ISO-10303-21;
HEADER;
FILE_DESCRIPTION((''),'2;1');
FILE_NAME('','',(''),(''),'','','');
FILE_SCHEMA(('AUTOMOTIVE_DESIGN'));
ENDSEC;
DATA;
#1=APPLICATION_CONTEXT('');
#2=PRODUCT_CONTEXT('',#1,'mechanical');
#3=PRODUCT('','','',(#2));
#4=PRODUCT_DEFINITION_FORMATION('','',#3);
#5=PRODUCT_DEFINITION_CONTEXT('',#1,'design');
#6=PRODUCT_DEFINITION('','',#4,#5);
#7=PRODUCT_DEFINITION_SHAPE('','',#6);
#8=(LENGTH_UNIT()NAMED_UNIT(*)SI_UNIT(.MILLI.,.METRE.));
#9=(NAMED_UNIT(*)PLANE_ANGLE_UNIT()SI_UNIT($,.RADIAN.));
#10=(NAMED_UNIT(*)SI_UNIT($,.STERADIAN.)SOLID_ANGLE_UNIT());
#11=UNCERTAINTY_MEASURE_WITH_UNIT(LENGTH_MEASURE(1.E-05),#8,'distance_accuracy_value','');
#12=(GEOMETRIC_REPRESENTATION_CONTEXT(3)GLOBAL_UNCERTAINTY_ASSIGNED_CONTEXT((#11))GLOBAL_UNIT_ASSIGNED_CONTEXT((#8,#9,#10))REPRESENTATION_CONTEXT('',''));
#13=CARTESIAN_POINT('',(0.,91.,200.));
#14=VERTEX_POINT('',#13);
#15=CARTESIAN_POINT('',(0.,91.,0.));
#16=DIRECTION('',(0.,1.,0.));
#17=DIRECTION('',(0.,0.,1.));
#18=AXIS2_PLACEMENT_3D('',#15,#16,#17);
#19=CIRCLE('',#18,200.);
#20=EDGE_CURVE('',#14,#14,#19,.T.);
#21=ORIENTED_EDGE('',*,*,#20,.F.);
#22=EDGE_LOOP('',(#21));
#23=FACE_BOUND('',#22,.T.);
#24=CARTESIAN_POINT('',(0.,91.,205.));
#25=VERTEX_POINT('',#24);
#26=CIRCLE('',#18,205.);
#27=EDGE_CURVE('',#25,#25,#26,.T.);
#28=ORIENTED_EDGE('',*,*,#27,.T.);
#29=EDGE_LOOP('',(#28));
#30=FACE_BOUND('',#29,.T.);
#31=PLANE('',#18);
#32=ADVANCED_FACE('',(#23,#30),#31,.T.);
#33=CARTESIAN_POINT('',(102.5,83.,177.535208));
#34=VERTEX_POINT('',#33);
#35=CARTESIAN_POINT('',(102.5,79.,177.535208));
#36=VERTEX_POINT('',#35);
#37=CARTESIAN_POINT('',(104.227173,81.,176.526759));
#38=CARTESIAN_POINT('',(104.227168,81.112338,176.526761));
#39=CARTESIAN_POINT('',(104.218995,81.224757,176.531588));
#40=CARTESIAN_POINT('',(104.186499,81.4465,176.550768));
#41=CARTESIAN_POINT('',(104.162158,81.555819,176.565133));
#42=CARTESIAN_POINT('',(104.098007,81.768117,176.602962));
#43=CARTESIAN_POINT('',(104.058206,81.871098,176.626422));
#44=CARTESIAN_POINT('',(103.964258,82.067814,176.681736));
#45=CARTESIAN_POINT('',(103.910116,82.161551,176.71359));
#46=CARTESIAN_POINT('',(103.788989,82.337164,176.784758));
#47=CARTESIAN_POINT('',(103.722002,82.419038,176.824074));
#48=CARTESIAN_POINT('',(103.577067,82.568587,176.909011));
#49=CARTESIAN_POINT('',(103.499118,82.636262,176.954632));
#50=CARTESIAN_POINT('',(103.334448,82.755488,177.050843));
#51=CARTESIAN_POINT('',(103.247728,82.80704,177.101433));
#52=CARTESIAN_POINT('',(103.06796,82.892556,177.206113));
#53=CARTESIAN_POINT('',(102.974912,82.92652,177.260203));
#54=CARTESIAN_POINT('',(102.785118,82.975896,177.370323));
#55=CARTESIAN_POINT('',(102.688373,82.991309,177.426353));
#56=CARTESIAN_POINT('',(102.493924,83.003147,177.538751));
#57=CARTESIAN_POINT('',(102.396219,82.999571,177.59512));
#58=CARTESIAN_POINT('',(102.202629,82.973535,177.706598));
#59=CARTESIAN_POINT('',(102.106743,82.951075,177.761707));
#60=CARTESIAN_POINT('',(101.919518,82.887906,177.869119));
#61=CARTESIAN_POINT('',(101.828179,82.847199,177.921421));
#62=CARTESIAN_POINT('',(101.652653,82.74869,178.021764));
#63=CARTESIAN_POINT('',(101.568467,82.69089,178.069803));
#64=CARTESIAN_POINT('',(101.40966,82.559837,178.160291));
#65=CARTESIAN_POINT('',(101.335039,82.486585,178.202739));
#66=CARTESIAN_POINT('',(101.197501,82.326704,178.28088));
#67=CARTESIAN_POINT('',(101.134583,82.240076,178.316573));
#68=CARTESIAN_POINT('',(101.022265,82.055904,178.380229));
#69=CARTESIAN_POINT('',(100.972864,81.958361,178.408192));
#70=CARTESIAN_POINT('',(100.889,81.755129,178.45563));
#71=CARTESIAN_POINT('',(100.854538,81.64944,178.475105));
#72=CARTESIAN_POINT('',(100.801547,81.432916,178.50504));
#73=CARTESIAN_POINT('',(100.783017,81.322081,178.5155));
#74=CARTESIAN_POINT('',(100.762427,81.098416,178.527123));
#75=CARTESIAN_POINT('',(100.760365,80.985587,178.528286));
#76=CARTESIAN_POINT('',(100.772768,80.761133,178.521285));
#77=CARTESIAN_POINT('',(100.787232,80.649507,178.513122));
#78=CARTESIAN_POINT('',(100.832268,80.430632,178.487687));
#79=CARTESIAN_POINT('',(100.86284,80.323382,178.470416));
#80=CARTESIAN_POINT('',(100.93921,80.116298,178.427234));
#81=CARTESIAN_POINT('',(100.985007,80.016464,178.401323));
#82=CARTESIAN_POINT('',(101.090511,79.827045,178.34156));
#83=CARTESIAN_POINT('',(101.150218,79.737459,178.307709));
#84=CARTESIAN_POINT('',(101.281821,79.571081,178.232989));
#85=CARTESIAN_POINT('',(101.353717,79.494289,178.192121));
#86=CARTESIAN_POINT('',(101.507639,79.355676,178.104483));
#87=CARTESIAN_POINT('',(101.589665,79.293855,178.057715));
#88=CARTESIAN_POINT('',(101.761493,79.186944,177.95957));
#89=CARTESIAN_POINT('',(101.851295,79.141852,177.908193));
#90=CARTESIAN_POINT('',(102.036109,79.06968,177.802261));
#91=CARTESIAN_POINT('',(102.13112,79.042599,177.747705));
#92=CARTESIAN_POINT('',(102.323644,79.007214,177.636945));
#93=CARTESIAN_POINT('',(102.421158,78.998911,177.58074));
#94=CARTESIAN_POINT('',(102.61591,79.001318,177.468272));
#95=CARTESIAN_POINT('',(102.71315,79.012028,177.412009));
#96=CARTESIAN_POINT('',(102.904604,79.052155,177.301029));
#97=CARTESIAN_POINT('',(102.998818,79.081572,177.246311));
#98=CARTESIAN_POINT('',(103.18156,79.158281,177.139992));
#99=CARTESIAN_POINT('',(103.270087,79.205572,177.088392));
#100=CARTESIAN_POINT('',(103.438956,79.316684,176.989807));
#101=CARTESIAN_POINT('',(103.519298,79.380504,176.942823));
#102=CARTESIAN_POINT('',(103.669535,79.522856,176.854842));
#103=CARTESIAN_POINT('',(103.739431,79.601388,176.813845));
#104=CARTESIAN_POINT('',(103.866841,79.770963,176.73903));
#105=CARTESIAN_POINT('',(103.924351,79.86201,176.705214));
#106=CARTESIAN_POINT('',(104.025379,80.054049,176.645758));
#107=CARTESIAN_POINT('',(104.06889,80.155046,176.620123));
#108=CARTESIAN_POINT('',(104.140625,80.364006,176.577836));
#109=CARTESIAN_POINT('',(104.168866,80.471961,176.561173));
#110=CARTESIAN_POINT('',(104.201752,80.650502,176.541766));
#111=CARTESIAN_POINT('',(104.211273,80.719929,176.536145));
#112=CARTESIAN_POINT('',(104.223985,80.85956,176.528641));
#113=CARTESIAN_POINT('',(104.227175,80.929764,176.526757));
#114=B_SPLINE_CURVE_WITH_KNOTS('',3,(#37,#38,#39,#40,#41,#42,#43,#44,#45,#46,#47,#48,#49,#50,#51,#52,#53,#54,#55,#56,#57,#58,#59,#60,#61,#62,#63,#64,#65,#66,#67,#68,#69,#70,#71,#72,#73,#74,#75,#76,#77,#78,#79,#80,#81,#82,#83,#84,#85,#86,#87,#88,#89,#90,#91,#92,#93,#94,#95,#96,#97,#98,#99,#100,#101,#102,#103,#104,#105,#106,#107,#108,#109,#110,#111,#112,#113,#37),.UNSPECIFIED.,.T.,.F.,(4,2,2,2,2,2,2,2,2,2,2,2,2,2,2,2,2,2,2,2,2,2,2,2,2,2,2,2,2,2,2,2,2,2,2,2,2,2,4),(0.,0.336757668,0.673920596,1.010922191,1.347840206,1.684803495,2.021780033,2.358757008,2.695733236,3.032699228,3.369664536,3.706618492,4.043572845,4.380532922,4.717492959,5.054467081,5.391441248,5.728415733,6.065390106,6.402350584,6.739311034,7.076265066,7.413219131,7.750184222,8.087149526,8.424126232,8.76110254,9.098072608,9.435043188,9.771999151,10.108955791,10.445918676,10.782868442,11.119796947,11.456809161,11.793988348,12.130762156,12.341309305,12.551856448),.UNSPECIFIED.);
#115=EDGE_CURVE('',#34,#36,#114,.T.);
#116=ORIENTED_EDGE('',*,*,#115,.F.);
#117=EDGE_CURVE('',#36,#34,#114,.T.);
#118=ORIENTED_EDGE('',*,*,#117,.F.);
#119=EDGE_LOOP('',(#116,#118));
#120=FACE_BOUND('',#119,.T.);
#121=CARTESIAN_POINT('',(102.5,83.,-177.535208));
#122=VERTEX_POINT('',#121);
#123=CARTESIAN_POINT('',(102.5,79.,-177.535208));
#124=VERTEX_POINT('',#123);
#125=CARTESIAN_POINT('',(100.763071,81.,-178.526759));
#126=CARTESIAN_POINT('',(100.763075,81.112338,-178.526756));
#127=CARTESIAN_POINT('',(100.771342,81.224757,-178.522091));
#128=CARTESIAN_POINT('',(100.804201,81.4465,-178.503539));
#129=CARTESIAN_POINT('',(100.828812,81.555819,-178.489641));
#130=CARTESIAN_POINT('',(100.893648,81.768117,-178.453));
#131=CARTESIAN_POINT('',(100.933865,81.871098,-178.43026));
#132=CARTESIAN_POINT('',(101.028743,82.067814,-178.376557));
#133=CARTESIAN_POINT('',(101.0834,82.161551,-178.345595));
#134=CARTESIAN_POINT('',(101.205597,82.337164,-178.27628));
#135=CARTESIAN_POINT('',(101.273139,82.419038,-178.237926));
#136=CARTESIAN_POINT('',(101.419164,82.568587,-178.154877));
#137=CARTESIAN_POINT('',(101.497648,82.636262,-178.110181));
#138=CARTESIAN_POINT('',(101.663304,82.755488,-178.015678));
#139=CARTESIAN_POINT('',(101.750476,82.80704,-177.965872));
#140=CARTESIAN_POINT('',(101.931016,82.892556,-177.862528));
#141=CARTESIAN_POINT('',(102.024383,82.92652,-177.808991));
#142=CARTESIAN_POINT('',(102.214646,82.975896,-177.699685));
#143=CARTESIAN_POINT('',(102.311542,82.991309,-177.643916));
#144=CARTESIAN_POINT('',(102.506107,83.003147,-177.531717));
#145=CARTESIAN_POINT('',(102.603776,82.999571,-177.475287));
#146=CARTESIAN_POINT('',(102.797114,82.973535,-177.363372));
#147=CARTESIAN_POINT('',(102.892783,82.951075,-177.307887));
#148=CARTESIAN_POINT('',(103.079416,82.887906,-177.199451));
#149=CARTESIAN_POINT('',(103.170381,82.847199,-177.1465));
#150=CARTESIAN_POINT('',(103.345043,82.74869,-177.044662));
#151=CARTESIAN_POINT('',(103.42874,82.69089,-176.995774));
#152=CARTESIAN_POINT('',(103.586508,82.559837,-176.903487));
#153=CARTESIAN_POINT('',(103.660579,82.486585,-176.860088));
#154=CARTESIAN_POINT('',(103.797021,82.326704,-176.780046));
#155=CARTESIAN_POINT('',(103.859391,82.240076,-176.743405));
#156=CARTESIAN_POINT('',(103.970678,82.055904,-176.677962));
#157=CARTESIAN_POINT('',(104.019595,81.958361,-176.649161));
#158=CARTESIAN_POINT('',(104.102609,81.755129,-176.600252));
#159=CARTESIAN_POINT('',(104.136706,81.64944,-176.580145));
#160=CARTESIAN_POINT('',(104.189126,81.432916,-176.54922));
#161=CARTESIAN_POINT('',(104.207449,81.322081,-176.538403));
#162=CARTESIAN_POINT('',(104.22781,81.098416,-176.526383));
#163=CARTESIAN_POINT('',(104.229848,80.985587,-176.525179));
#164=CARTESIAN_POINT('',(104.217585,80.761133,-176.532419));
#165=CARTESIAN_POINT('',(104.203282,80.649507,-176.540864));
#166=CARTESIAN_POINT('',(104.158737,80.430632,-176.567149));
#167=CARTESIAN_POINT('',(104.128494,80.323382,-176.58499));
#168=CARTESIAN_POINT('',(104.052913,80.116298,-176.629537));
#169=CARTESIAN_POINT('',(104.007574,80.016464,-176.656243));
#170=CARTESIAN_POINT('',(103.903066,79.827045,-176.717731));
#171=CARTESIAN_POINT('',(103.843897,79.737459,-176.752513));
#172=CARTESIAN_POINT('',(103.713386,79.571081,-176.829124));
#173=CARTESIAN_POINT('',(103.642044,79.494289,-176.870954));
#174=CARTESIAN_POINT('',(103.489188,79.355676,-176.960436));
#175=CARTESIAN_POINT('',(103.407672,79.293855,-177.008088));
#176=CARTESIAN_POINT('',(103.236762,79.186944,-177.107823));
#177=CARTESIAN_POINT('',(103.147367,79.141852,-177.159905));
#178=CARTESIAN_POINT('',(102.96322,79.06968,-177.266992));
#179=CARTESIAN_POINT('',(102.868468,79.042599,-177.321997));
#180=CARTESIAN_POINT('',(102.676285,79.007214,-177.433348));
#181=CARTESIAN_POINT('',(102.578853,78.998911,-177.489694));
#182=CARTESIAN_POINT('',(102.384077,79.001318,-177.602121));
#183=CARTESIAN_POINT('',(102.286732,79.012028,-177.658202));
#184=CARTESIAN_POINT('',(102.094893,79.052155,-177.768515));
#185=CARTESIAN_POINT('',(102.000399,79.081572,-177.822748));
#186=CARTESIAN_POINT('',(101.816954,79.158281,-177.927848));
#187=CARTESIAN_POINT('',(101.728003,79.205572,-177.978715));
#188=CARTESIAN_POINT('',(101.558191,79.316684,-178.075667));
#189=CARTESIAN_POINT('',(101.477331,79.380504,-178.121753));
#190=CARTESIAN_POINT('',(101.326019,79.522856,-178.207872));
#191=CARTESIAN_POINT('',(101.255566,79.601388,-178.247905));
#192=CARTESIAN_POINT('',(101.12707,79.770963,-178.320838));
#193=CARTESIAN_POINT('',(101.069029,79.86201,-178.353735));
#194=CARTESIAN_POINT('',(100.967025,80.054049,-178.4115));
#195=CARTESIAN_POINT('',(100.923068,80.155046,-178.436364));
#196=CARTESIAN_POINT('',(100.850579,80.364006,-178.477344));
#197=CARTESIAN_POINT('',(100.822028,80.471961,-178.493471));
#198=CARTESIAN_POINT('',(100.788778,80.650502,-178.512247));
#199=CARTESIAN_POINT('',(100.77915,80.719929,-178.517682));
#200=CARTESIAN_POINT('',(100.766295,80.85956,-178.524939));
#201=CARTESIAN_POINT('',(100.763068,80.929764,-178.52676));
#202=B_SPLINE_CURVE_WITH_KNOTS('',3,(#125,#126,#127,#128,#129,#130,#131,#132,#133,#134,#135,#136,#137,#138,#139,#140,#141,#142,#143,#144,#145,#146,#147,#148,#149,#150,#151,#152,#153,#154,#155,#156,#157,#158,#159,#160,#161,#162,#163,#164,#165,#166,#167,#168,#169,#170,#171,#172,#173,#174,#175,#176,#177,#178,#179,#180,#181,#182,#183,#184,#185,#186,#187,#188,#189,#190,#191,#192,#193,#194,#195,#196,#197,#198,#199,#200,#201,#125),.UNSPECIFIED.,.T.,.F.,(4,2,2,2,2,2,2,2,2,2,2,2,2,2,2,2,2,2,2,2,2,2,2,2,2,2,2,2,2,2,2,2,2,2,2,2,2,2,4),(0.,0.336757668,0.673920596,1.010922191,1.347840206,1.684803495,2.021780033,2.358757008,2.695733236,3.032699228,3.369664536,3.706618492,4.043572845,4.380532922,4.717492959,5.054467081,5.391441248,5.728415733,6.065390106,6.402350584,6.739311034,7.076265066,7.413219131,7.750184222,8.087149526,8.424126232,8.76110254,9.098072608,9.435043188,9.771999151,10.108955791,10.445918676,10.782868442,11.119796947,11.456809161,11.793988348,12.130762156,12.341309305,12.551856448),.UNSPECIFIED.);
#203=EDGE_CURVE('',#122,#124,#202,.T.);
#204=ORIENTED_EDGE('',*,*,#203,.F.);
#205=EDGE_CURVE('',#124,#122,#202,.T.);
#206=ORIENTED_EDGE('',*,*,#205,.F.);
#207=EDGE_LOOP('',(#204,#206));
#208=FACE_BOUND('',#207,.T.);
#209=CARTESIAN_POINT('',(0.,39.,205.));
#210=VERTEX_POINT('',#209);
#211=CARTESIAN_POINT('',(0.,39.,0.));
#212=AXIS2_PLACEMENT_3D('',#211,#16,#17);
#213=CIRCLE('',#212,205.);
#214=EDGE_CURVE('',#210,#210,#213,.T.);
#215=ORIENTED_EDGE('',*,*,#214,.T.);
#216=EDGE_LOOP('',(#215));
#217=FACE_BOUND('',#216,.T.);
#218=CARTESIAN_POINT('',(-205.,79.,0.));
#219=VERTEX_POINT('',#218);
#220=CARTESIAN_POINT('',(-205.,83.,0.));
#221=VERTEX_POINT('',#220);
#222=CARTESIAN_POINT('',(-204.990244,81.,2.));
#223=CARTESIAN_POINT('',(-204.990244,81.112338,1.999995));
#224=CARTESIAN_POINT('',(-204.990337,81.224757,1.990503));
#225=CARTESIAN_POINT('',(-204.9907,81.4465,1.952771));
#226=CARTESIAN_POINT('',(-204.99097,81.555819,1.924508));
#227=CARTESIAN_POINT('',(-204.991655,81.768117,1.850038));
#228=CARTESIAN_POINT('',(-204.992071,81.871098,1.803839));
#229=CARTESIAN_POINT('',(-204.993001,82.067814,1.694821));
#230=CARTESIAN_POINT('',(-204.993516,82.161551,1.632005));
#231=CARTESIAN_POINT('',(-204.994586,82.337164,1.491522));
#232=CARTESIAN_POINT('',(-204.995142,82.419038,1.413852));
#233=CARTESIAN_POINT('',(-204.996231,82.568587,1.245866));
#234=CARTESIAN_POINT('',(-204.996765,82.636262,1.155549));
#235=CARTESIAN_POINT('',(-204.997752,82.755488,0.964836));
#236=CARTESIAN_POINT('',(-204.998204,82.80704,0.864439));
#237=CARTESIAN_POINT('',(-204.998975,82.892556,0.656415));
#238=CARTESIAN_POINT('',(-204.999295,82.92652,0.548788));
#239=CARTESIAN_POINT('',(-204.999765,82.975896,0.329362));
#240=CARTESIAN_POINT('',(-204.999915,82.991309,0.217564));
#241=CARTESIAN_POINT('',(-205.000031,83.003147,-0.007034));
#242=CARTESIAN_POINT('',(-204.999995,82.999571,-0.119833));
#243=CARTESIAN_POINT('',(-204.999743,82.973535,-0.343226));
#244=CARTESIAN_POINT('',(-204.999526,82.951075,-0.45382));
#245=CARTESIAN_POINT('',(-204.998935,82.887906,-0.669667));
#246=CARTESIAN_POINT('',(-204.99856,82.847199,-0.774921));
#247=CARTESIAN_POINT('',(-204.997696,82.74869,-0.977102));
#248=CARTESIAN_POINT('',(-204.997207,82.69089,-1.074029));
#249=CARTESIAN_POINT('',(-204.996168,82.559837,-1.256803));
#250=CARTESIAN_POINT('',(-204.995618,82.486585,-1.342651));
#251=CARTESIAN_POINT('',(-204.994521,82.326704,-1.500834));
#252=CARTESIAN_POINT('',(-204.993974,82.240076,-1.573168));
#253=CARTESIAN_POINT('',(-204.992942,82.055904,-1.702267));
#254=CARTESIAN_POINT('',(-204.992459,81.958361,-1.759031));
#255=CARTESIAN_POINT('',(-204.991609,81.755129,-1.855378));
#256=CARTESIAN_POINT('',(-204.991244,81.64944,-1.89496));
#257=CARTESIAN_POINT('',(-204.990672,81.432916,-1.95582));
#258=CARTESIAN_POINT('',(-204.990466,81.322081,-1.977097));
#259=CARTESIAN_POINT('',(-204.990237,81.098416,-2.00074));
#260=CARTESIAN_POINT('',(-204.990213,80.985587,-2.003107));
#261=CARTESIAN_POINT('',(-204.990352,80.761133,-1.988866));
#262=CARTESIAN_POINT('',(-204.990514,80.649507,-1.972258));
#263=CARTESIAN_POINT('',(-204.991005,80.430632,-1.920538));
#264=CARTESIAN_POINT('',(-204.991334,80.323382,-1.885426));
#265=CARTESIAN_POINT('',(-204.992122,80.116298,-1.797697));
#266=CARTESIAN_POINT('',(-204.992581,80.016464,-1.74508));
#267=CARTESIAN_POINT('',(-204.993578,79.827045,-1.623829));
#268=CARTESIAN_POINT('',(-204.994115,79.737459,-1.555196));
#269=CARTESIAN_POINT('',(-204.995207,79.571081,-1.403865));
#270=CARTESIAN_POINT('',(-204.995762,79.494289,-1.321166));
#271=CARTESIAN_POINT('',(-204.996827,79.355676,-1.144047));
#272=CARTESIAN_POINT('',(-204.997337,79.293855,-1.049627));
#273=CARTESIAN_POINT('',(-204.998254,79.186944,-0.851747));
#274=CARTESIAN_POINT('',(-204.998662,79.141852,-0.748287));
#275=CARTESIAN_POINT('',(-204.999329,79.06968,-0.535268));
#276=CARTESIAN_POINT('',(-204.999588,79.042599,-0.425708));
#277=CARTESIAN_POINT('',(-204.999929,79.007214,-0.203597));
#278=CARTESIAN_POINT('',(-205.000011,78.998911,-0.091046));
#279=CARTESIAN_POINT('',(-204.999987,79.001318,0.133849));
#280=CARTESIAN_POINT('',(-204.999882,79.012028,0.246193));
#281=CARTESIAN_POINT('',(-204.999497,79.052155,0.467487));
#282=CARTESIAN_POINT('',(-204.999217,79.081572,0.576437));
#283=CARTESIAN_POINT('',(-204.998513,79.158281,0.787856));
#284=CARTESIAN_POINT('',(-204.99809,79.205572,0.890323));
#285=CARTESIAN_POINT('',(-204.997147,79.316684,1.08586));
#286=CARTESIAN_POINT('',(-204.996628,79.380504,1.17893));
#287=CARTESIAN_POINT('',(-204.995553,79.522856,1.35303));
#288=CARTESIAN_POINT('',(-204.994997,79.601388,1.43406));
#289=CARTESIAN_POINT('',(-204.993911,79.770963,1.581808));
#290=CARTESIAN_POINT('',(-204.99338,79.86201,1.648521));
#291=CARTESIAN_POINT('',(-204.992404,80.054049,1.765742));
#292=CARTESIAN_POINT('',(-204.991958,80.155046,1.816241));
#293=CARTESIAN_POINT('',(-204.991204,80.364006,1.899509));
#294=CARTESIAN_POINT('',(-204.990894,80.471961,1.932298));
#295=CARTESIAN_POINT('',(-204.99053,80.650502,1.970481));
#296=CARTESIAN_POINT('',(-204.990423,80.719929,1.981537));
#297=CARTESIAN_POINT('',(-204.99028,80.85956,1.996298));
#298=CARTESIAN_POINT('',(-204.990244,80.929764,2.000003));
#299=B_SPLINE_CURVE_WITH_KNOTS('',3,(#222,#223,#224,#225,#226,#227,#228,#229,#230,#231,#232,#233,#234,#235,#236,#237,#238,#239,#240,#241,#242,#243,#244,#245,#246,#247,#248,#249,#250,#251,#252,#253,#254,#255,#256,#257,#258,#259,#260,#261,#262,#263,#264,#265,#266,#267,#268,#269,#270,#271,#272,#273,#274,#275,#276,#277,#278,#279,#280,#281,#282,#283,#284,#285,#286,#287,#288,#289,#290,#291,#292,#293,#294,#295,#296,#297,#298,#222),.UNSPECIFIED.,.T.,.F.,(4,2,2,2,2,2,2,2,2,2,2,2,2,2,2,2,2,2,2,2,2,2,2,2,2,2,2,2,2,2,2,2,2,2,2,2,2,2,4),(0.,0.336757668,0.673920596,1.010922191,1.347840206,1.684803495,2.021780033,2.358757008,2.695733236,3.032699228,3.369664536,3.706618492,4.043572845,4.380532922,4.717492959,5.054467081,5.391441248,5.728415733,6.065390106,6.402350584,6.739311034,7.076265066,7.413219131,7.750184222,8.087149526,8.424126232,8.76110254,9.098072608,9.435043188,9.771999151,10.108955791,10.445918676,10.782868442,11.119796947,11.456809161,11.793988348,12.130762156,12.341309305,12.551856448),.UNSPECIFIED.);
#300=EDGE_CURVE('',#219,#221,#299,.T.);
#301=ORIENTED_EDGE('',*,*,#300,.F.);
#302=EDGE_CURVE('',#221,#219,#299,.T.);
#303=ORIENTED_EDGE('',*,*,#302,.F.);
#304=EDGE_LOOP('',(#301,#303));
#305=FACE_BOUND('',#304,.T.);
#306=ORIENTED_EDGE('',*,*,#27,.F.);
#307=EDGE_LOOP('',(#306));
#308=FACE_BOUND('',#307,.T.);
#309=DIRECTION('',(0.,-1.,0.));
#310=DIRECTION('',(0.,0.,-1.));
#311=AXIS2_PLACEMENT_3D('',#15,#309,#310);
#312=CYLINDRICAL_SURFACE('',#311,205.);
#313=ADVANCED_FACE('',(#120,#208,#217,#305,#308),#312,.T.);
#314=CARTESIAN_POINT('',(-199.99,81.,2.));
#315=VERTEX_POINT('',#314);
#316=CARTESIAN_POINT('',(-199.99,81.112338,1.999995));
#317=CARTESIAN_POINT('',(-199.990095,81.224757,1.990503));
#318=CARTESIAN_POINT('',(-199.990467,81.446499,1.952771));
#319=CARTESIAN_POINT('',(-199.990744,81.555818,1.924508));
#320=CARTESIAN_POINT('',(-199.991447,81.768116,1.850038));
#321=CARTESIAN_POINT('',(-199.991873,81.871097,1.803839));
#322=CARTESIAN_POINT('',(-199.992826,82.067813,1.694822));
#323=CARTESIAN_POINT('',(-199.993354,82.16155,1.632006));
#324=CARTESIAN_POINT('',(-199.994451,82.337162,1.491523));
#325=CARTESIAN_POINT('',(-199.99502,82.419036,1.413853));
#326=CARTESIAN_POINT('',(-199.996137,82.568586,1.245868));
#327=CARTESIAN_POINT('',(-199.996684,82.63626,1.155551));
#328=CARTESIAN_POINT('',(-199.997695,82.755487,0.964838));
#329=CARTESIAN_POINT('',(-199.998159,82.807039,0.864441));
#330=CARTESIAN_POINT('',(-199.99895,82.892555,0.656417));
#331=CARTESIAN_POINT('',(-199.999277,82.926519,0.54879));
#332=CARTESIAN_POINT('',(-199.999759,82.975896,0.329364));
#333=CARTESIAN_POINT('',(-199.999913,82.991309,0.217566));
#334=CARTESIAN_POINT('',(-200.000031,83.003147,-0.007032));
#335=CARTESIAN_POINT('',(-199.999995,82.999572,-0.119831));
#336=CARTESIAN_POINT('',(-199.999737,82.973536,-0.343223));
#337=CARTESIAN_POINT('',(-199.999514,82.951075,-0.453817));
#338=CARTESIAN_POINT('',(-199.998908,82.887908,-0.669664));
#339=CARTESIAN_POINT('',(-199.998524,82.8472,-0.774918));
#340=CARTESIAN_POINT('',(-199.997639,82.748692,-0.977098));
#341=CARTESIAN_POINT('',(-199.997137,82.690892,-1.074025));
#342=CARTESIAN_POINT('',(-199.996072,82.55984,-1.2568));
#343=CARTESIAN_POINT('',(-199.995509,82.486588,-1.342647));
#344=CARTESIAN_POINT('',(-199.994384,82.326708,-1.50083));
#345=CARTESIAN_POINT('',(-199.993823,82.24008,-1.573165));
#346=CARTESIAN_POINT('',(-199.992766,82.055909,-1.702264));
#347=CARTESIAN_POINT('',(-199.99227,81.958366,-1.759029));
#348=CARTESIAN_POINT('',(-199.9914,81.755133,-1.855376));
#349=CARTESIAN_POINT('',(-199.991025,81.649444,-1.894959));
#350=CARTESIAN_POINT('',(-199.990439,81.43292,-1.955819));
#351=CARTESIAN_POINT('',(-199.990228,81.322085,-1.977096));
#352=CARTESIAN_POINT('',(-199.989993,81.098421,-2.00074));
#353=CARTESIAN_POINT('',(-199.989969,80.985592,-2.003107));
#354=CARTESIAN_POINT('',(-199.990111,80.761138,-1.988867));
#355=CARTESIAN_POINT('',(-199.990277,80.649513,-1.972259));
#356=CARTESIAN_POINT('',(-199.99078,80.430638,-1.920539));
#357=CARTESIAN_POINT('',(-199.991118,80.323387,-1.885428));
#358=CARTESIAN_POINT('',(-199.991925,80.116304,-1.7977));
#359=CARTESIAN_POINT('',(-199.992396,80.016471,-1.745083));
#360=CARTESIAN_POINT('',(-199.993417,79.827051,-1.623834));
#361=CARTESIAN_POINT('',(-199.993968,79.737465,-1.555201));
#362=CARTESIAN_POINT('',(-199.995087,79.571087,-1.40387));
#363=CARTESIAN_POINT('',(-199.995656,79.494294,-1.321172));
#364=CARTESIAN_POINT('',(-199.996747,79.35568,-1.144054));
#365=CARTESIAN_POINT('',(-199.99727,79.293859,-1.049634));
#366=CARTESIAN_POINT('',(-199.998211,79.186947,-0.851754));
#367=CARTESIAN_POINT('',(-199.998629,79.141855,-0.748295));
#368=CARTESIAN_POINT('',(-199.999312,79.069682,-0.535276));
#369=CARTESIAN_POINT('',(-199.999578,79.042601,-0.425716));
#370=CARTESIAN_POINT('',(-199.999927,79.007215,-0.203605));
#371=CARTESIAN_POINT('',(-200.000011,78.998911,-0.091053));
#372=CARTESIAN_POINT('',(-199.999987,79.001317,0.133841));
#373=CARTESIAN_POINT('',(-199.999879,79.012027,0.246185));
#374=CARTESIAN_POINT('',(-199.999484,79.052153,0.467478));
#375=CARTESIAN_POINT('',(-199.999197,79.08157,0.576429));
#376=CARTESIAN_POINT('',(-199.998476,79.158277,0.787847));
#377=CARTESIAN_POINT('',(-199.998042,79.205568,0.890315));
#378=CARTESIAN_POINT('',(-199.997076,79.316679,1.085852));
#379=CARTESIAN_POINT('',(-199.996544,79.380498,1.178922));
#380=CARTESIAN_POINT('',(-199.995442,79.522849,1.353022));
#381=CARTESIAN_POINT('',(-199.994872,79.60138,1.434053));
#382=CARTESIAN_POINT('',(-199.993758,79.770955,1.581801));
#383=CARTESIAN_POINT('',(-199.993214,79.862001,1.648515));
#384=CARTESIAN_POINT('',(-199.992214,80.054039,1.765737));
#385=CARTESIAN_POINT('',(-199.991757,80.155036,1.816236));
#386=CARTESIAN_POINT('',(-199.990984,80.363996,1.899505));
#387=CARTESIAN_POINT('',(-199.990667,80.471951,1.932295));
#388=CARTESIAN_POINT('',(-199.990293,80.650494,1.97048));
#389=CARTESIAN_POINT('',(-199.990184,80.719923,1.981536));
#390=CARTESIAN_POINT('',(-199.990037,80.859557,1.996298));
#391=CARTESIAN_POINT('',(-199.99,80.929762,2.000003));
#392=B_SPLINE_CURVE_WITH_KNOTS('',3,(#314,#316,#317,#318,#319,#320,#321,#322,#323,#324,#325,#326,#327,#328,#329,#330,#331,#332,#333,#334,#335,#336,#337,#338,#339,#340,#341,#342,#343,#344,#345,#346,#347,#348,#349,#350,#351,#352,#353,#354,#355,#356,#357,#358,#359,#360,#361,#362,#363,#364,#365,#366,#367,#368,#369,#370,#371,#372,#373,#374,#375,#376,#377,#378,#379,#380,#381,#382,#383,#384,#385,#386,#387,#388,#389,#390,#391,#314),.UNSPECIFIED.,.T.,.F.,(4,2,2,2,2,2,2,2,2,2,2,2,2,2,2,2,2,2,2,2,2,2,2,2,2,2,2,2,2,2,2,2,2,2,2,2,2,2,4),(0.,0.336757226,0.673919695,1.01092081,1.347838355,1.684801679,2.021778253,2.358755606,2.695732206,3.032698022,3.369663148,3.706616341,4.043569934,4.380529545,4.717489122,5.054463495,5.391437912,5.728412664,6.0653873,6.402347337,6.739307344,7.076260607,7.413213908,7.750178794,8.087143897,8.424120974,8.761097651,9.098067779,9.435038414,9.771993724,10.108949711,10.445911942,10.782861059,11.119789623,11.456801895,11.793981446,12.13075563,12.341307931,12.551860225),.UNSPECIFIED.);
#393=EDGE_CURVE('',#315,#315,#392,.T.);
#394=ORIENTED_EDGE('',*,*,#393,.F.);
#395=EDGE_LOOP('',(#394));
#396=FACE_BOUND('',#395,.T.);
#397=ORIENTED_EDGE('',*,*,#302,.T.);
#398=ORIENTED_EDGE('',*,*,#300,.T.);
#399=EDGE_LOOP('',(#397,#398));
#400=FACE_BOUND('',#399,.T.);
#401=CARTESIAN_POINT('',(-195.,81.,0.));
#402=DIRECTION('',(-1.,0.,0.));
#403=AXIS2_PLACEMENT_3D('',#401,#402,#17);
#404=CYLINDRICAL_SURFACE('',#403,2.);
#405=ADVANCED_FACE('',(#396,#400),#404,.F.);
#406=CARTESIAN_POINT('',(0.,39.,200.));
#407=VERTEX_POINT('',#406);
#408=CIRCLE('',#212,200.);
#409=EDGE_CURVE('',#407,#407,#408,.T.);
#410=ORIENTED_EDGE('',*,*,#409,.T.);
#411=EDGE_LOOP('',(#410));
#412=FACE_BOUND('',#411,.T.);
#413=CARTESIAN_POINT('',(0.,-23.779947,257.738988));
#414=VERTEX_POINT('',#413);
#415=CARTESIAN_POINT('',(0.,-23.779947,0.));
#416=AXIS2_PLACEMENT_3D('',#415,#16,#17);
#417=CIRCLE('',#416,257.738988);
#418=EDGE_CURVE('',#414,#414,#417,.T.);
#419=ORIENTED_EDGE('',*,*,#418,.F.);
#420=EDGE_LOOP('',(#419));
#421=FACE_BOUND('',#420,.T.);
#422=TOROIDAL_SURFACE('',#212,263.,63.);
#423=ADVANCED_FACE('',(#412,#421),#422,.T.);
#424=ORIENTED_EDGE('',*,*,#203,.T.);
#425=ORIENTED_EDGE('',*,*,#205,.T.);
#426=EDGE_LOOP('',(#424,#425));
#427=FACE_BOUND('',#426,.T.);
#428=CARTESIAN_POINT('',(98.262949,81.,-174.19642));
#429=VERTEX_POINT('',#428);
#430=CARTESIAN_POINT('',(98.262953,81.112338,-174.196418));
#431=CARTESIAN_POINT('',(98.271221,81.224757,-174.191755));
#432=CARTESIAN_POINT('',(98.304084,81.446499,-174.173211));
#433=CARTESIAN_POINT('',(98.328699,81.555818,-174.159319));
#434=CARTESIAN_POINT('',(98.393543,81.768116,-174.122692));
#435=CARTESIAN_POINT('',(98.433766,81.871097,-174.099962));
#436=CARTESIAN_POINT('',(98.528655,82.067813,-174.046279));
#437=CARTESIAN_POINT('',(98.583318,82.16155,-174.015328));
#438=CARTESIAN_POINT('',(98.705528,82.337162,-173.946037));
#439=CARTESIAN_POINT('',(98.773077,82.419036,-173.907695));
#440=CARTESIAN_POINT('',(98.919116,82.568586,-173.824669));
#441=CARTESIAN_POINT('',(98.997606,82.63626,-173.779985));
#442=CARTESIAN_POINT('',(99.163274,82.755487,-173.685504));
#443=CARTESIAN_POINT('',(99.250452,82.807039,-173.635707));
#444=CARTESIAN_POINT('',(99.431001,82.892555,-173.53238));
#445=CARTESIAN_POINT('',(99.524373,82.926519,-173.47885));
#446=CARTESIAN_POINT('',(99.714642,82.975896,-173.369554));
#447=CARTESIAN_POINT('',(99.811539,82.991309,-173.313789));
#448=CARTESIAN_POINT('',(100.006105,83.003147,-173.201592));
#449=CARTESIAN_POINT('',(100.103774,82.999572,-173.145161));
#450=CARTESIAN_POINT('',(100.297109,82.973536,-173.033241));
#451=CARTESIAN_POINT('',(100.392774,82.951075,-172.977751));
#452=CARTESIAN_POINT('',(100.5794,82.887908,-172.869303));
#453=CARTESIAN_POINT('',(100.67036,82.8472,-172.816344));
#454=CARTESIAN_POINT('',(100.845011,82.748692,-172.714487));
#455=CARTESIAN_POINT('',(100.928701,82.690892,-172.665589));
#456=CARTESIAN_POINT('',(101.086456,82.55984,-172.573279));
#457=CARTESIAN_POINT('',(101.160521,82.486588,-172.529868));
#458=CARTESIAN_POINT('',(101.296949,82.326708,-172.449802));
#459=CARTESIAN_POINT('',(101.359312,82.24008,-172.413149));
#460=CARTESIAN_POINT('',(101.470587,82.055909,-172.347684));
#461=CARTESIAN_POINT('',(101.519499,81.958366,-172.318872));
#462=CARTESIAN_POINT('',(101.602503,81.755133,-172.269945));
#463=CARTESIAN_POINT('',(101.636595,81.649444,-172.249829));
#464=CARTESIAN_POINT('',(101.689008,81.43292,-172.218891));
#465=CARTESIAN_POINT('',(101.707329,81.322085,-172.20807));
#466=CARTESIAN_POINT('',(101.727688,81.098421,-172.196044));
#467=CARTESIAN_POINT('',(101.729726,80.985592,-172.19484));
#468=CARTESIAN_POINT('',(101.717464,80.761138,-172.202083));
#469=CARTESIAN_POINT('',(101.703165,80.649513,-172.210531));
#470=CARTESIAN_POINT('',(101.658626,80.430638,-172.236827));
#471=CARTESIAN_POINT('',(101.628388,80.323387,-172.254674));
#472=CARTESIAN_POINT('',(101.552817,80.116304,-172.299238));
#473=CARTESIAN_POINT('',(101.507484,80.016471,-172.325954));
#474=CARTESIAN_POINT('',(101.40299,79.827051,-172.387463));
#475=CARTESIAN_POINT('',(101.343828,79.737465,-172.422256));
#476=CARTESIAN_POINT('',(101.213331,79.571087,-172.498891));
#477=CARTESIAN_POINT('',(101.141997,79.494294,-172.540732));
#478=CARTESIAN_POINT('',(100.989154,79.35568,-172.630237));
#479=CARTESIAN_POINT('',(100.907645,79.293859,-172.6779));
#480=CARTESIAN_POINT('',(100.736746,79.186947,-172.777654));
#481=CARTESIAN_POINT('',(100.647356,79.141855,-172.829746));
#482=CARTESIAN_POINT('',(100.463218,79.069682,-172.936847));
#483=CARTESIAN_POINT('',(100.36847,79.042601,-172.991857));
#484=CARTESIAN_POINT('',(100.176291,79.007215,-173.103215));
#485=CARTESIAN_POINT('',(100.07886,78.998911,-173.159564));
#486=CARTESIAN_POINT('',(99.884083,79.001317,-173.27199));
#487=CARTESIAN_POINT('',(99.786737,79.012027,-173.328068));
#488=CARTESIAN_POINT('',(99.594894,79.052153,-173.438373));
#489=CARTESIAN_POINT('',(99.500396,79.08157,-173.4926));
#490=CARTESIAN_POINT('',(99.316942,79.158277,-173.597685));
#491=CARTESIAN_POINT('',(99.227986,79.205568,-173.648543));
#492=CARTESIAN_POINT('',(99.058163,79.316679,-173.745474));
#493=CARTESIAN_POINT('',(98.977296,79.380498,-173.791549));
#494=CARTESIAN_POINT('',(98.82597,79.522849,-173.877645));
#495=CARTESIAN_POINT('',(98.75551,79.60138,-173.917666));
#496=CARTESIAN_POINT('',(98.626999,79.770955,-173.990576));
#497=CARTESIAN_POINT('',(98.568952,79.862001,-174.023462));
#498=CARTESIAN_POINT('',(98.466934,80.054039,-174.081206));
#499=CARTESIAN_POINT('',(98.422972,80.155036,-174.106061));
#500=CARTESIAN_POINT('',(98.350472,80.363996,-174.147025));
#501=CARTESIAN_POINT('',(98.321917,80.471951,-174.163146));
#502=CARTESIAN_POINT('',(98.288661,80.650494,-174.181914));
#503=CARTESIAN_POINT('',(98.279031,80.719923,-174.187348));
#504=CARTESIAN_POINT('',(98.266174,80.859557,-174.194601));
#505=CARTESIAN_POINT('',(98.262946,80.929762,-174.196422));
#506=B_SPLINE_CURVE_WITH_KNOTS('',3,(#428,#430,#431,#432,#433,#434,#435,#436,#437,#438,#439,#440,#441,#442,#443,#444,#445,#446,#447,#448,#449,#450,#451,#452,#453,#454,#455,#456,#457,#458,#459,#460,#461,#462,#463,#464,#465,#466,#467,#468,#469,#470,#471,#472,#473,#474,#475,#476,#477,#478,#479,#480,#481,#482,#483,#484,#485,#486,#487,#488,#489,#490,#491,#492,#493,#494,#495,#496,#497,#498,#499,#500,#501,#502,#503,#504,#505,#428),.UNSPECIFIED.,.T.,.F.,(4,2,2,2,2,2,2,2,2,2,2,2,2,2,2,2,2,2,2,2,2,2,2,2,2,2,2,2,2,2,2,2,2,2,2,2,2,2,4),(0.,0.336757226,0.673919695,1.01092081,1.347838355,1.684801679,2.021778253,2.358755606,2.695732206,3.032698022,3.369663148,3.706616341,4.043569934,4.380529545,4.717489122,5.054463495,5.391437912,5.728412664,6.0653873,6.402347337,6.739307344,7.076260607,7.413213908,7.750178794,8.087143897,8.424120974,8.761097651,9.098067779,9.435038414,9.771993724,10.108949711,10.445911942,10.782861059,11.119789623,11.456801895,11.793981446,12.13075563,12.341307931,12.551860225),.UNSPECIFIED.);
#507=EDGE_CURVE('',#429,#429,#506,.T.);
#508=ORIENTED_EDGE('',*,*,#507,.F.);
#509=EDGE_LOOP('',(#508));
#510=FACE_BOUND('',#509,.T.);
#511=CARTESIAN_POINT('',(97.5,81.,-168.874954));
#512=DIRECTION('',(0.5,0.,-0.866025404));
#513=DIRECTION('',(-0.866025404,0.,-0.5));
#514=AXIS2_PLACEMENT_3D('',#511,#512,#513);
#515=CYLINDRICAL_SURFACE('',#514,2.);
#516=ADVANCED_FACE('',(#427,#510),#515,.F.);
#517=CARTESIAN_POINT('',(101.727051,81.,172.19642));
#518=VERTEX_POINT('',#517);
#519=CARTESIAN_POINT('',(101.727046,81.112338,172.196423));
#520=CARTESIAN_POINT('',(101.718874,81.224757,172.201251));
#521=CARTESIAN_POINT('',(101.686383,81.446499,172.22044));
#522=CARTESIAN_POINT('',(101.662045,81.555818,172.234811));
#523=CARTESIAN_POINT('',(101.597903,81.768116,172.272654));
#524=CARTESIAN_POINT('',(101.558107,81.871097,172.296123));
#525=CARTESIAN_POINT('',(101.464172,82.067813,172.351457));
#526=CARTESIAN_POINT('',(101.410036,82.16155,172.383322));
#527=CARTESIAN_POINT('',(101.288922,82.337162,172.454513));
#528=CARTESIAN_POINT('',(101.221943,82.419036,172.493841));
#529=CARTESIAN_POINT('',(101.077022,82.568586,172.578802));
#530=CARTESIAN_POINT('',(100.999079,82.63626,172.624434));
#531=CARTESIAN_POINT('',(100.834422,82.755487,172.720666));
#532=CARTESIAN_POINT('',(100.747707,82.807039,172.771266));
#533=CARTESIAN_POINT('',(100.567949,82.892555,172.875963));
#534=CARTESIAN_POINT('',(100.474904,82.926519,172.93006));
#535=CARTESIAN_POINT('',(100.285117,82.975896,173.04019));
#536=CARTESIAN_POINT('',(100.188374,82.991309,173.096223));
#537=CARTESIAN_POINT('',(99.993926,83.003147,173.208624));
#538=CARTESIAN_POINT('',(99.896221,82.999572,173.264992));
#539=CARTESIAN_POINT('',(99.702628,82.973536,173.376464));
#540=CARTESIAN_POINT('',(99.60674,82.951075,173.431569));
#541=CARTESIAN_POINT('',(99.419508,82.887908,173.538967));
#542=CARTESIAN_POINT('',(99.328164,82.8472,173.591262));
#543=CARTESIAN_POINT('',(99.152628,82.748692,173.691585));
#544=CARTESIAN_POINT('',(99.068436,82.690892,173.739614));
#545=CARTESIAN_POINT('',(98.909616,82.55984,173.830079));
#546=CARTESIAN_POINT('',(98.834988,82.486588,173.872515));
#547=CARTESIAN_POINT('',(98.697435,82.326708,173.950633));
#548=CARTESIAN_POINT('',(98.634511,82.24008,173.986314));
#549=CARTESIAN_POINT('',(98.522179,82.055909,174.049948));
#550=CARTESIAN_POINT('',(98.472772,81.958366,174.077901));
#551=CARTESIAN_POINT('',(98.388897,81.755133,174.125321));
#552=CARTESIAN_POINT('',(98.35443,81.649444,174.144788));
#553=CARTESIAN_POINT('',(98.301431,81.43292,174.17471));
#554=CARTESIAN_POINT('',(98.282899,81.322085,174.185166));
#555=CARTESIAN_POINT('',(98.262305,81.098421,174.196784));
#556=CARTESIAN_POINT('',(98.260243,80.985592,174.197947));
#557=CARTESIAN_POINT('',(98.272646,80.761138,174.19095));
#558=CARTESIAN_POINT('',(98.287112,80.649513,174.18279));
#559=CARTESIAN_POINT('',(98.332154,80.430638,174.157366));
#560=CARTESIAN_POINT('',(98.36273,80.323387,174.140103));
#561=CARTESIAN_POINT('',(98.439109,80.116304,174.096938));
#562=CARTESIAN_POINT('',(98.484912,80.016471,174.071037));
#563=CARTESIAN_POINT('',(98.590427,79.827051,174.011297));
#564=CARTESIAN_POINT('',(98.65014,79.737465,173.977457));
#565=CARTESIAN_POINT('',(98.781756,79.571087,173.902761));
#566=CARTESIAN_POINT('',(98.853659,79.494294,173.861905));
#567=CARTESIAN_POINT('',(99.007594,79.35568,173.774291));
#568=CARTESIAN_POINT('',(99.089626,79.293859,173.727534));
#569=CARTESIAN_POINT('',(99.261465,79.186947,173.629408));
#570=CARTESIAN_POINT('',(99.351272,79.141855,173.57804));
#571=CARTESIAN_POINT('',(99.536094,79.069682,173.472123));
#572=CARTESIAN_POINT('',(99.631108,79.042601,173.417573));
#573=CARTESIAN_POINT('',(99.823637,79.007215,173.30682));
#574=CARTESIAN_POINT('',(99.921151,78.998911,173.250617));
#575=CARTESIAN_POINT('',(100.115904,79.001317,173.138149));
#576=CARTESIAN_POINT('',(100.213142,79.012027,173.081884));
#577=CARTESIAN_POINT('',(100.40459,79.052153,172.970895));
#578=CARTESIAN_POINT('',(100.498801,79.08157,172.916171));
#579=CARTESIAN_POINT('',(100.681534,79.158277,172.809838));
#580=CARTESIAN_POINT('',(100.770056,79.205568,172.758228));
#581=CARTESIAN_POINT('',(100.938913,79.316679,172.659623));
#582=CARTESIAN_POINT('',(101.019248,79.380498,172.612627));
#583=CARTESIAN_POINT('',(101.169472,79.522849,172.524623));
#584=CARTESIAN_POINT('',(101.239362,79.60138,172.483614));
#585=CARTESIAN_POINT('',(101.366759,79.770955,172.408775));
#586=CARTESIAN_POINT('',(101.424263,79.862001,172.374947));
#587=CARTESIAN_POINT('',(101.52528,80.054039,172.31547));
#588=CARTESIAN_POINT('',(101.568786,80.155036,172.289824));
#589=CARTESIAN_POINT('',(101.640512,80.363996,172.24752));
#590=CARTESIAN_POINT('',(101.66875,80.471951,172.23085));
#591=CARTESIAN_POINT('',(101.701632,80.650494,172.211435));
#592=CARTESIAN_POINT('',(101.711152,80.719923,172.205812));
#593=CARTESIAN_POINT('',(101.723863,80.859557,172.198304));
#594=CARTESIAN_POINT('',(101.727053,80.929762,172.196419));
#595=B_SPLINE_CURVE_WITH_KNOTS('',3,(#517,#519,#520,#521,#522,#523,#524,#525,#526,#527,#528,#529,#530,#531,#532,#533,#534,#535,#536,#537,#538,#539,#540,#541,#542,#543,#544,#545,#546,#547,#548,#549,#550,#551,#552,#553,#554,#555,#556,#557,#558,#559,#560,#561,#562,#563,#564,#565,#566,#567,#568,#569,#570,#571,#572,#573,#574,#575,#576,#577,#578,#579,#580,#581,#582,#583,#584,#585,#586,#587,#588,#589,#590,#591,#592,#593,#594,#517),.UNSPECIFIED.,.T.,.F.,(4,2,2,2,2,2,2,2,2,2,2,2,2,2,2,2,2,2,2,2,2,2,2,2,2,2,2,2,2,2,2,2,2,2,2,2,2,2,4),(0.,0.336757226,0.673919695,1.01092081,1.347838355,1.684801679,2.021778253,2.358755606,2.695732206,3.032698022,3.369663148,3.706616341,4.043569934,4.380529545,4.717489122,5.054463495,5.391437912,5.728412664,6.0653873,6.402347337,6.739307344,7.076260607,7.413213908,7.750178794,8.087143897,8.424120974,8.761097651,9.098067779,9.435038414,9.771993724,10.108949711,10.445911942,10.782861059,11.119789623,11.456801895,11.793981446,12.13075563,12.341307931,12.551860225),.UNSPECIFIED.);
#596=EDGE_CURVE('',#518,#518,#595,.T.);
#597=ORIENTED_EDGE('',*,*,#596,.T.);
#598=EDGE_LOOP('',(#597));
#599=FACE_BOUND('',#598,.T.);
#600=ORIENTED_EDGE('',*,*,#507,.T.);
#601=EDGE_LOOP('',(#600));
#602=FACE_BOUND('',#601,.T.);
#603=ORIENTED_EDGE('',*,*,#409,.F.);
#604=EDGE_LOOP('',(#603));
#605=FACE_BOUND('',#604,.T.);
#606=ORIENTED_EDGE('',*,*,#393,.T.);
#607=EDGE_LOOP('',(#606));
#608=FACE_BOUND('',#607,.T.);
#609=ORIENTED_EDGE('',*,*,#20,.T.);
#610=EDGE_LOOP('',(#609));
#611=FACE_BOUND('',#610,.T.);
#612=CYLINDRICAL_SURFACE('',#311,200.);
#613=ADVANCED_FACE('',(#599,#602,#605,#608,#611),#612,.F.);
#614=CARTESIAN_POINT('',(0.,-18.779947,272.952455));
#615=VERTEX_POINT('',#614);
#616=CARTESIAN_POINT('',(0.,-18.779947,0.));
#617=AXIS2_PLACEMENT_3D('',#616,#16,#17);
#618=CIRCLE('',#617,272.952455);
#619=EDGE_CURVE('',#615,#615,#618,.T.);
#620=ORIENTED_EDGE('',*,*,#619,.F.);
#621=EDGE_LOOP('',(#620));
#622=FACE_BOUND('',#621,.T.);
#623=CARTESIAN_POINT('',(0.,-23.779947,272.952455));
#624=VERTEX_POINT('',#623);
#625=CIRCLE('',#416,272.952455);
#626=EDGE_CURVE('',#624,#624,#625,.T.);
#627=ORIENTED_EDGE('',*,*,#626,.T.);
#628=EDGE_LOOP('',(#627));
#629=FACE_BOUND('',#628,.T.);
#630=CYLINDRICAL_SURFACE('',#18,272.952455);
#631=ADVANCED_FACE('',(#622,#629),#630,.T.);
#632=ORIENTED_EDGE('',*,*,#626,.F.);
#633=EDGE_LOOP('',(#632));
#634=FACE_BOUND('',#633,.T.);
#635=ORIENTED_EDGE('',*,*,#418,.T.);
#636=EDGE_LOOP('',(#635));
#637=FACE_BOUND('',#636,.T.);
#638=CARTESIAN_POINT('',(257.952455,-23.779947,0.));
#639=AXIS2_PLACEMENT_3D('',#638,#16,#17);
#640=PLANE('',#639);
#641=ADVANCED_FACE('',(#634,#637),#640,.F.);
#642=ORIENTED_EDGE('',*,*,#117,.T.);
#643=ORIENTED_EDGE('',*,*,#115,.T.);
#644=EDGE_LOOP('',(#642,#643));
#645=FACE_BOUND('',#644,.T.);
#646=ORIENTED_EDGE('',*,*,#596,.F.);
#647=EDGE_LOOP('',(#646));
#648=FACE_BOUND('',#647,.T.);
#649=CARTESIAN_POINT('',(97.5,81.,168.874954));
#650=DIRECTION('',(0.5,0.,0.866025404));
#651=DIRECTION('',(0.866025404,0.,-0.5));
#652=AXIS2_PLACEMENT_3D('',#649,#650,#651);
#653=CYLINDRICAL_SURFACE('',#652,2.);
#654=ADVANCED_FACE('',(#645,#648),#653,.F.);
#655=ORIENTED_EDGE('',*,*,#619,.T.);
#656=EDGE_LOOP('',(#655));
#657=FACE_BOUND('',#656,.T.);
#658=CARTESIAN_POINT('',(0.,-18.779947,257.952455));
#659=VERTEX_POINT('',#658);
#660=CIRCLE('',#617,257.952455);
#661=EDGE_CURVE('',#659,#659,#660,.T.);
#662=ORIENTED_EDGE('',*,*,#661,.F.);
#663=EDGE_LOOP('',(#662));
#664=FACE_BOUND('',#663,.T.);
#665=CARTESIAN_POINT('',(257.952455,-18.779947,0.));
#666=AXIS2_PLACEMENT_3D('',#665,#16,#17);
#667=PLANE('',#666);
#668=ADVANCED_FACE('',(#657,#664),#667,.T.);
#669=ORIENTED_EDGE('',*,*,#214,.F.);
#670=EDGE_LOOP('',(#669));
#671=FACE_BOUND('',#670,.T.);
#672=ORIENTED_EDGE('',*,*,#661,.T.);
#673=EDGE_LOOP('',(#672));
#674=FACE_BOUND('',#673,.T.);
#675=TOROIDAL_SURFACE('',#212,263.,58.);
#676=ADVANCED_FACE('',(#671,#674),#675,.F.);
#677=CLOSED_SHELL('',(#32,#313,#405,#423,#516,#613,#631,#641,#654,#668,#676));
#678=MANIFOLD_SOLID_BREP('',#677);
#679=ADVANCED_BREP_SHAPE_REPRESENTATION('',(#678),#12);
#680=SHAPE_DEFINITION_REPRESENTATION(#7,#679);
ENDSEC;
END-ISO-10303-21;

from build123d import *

# Parameters (mm, degrees)
LOFT_THIN1_START       = 39
LOFT_THIN1_OUTLINE_R   = 205
LOFT_THIN1_OUTLINE_R_2 = 200
LOFT_THIN1_DEPTH       = 52
SKETCH6_R              = 2
CUT_EXTRUDE1_DEPTH     = 10
CIRPATTERN1_COUNT      = 3


# Read off the part's stored shape, not the designer's step: Loft-Thin1
with BuildPart() as part:
    # Loft-Thin1 outline → Loft-Thin1 (new body)
    with BuildSketch(Plane(origin=(0, 0, 0), x_dir=(1, 0, 0), z_dir=(0, 1, 0)).offset(LOFT_THIN1_START)):
        Circle(LOFT_THIN1_OUTLINE_R)
        Circle(LOFT_THIN1_OUTLINE_R_2, mode=Mode.SUBTRACT)
    extrude(amount=LOFT_THIN1_DEPTH)

    # Sketch5 → Revolve-Thin2 (revolve)
    with BuildSketch(Plane.XY, mode=Mode.PRIVATE) as revolve_thin2_sk:
        with BuildLine():
            ThreePointArc((205, 39), (220.240453532, -0.187002767), (257.952454685, -18.779947095))
            Line((257.952454685, -18.779947095), (272.952454685, -18.779947095))
            Line((272.952454685, -18.779947095), (272.952454685, -23.779947095))
            Line((272.952454685, -23.779947095), (257.738988428, -23.779947095))
            ThreePointArc((257.738988428, -23.779947095), (216.629515158, -3.647135138), (200, 39))
            Line((200, 39), (205, 39))
        make_face()
    revolve(revolve_thin2_sk.sketch.rotate(Axis((0, 91, 0), (0, -1, 0)), 90), axis=Axis((0, 91, 0), (0, -1, 0)))

    # Sketch6 → Cut-Extrude1 (cut)
    with BuildSketch(Plane.ZY.offset(205)):
        with Locations((0, 81)):
            Circle(SKETCH6_R)
    cut_extrude1 = extrude(amount=-CUT_EXTRUDE1_DEPTH, mode=Mode.SUBTRACT)

    # CirPattern1: Cut-Extrude1 ×3 about axis
    cirpattern1_axis = Axis((0, 91, 0), (0, 1, 0))
    for i in range(1, CIRPATTERN1_COUNT):
        add(cut_extrude1.rotate(cirpattern1_axis, i * 360 / CIRPATTERN1_COUNT), mode=Mode.SUBTRACT)


solid = part.part
